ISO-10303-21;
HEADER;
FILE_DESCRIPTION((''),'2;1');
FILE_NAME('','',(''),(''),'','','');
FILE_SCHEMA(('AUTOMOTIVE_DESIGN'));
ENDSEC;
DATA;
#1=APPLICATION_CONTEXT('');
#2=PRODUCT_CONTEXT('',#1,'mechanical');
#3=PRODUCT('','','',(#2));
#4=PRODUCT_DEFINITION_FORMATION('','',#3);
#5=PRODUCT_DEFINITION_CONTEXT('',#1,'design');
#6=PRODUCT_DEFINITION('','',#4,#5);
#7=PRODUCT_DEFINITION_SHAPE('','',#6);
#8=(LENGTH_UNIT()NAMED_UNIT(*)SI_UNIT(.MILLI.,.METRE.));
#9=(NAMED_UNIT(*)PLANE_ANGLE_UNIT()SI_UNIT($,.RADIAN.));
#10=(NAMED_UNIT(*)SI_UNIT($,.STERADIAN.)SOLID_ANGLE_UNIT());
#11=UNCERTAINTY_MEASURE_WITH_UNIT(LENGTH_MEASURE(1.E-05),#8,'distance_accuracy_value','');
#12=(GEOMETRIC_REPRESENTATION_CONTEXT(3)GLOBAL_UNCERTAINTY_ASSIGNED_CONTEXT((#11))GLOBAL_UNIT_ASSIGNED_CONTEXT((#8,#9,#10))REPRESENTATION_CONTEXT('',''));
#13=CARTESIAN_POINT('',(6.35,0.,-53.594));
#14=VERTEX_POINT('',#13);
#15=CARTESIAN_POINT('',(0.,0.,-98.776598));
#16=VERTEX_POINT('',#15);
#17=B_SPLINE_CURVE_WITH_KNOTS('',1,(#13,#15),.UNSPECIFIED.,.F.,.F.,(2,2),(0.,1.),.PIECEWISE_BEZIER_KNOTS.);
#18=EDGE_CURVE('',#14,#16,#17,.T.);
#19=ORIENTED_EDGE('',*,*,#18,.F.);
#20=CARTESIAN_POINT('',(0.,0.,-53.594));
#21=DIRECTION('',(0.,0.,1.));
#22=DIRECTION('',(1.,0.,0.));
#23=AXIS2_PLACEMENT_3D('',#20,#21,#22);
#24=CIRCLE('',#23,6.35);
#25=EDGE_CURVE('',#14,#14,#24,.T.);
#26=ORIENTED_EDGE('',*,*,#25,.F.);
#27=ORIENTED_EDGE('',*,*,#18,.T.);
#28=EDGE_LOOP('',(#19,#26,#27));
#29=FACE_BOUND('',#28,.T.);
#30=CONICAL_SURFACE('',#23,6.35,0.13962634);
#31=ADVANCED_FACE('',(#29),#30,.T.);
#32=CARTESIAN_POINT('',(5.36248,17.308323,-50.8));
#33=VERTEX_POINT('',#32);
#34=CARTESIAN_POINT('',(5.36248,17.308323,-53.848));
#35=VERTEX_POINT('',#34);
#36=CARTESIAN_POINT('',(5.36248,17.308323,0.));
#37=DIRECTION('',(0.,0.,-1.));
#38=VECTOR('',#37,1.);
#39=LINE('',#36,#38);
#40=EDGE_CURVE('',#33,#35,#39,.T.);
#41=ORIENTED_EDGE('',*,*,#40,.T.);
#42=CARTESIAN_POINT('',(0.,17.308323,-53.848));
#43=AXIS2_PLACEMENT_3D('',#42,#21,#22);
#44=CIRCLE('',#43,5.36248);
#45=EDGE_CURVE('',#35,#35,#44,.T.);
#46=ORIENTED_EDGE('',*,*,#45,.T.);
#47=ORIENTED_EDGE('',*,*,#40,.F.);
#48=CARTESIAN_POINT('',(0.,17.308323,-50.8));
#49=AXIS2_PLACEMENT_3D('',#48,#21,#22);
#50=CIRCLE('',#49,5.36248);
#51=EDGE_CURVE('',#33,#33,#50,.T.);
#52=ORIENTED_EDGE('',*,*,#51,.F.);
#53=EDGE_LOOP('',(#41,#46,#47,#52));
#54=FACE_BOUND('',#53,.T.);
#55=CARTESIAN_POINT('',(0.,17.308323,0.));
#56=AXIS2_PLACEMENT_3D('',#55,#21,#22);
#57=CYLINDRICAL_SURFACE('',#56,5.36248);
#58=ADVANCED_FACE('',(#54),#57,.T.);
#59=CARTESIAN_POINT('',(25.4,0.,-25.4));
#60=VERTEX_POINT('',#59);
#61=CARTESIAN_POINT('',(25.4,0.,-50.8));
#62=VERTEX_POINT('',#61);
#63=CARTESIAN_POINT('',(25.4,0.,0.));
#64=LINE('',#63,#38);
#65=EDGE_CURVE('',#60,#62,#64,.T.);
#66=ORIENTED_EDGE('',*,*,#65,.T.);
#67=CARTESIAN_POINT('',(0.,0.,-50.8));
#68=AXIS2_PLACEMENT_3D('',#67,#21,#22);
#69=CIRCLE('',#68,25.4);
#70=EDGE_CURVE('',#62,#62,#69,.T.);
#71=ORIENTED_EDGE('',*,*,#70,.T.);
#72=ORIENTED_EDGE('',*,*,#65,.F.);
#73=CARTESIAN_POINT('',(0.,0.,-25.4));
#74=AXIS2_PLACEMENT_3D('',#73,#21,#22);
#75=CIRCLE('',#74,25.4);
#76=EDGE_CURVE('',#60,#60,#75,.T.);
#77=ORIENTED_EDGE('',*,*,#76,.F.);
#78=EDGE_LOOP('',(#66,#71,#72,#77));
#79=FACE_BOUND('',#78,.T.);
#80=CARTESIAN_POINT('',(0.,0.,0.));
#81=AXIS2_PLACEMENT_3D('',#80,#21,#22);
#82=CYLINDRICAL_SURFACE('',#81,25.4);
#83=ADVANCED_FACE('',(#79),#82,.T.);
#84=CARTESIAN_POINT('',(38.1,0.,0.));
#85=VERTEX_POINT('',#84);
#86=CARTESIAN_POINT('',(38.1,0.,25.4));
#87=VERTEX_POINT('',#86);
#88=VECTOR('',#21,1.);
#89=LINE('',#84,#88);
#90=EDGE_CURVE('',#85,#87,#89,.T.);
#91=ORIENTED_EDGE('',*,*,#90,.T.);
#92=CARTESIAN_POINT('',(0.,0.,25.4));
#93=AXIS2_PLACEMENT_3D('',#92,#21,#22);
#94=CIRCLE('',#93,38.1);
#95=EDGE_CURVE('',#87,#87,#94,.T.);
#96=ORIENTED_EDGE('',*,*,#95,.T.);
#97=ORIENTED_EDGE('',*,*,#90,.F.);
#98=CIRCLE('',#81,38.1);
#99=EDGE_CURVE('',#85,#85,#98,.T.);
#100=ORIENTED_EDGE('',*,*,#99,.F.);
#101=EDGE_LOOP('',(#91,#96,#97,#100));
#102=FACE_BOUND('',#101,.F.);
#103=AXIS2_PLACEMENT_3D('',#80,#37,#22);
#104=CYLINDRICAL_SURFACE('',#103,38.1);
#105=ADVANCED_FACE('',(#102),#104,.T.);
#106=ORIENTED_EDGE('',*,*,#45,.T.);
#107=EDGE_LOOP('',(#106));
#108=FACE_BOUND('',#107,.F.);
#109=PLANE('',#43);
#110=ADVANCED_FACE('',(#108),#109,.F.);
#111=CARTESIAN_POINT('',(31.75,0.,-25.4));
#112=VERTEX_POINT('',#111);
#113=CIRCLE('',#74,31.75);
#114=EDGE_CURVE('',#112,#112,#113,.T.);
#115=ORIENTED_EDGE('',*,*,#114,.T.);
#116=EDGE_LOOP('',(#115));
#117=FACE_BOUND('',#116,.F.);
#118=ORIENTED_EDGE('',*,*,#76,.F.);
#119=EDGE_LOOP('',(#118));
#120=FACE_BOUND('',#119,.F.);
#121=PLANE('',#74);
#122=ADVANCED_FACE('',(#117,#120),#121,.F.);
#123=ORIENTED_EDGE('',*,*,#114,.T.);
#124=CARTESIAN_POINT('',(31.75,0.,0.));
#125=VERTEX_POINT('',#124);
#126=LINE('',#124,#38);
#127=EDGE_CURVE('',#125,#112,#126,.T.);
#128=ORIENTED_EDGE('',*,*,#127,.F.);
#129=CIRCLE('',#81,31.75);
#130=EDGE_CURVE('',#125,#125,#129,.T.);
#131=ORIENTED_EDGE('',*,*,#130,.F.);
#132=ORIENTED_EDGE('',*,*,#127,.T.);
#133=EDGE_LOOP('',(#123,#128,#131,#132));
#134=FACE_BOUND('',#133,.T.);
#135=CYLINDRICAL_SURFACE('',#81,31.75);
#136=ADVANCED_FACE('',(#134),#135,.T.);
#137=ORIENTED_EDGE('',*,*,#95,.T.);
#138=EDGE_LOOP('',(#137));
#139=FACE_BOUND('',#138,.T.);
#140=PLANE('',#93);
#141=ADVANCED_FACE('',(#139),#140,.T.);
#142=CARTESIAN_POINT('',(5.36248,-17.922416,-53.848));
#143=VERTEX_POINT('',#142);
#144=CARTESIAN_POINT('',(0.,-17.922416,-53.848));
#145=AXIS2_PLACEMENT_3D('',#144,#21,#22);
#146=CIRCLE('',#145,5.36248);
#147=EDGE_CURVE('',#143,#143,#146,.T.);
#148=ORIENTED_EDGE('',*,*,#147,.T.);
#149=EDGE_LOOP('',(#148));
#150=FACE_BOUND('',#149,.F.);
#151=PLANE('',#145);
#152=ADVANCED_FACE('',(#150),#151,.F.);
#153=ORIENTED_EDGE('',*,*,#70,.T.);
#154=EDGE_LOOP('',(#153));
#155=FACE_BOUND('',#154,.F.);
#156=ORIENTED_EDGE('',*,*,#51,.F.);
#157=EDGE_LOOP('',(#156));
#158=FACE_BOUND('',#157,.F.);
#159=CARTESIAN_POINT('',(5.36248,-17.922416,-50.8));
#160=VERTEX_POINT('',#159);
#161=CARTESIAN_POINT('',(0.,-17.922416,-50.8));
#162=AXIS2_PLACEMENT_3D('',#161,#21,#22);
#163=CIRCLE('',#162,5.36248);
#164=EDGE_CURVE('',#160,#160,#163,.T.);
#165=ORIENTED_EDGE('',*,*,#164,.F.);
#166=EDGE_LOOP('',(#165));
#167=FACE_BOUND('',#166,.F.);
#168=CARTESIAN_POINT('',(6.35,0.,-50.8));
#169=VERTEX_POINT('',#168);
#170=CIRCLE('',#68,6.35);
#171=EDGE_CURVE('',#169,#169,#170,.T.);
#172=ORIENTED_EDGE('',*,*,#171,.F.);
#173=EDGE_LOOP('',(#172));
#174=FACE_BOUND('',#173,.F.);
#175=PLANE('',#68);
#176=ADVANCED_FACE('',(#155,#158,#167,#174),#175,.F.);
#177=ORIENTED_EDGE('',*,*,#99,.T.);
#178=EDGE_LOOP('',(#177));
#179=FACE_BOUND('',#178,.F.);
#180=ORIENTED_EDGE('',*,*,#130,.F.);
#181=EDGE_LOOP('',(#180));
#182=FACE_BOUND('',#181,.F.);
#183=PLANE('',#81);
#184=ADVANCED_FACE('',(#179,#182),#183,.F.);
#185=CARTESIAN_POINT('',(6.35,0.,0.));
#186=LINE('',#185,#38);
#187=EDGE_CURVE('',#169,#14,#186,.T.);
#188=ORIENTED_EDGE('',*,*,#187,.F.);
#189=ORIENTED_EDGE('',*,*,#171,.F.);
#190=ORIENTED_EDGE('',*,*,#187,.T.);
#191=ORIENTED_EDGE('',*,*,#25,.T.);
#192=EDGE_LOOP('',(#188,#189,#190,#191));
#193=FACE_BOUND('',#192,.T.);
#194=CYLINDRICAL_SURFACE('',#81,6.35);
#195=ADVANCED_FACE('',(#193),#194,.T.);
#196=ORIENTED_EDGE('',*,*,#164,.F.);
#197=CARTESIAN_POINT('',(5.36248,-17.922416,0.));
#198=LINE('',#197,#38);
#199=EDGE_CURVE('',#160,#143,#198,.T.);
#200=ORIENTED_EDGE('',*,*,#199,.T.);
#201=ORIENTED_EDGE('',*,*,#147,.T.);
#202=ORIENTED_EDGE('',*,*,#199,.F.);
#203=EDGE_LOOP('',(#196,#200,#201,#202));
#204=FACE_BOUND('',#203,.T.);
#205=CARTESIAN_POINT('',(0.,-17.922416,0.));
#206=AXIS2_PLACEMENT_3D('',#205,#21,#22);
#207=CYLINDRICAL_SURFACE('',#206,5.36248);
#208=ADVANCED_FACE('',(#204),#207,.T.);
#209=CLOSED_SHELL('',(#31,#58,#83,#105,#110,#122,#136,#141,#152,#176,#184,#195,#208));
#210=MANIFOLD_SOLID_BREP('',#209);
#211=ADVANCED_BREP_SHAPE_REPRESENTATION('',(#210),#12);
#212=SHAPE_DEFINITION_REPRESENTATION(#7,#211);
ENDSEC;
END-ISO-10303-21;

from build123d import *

# Parameters (mm, degrees)
F0_R      = 38.1
F1_DEPTH  = 25.4
F2_R      = 31.75
F3_DEPTH  = 25.4
F4_R      = 25.4
F5_DEPTH  = 50.8
F6_R      = 6.35
F7_DEPTH  = 53.594
F7_FACE_R = 6.35
F10_R     = 5.3624799473
F11_DEPTH = 53.848
F9_R      = 5.3624799473
F12_DEPTH = 53.848


# Not quite as in the source:
# - an extrude whose draft closes it to a point is written as a loft to that point


with BuildPart() as f1:
    # F0 (on Top) → F1 (new body)
    with BuildSketch(Plane.XY):
        Circle(F0_R)
    extrude(amount=F1_DEPTH)

    # F2 (on Top) → F3 (join)
    with BuildSketch(Plane.XY):
        Circle(F2_R)
    extrude(amount=-F3_DEPTH)

    # F4 (on Top) → F5 (join)
    with BuildSketch(Plane.XY):
        Circle(F4_R)
    extrude(amount=-F5_DEPTH)

    # F6 (on Top) → F7 (join)
    with BuildSketch(Plane.XY):
        Circle(F6_R)
    extrude(amount=-F7_DEPTH)

    # F7_face (on face) → F8 section 0
    with BuildSketch(Plane(origin=(0, 0, -53.594), x_dir=(1, 0, 0), z_dir=(0, 0, -1)), mode=Mode.PRIVATE) as f8_s0:
        Circle(F7_FACE_R)
    loft([f8_s0.sketch, Vertex(0, 0, -98.7765977371)], ruled=True)

    # F10 (on Top) → F11 (join)
    with BuildSketch(Plane.XY):
        with Locations((0, 17.3083227128)):
            Circle(F10_R)
    extrude(amount=-F11_DEPTH)

    # F9 (on Top) → F12 (join)
    with BuildSketch(Plane.XY):
        with Locations((0, -17.9224163294)):
            Circle(F9_R)
    extrude(amount=-F12_DEPTH)


solid = f1.part
